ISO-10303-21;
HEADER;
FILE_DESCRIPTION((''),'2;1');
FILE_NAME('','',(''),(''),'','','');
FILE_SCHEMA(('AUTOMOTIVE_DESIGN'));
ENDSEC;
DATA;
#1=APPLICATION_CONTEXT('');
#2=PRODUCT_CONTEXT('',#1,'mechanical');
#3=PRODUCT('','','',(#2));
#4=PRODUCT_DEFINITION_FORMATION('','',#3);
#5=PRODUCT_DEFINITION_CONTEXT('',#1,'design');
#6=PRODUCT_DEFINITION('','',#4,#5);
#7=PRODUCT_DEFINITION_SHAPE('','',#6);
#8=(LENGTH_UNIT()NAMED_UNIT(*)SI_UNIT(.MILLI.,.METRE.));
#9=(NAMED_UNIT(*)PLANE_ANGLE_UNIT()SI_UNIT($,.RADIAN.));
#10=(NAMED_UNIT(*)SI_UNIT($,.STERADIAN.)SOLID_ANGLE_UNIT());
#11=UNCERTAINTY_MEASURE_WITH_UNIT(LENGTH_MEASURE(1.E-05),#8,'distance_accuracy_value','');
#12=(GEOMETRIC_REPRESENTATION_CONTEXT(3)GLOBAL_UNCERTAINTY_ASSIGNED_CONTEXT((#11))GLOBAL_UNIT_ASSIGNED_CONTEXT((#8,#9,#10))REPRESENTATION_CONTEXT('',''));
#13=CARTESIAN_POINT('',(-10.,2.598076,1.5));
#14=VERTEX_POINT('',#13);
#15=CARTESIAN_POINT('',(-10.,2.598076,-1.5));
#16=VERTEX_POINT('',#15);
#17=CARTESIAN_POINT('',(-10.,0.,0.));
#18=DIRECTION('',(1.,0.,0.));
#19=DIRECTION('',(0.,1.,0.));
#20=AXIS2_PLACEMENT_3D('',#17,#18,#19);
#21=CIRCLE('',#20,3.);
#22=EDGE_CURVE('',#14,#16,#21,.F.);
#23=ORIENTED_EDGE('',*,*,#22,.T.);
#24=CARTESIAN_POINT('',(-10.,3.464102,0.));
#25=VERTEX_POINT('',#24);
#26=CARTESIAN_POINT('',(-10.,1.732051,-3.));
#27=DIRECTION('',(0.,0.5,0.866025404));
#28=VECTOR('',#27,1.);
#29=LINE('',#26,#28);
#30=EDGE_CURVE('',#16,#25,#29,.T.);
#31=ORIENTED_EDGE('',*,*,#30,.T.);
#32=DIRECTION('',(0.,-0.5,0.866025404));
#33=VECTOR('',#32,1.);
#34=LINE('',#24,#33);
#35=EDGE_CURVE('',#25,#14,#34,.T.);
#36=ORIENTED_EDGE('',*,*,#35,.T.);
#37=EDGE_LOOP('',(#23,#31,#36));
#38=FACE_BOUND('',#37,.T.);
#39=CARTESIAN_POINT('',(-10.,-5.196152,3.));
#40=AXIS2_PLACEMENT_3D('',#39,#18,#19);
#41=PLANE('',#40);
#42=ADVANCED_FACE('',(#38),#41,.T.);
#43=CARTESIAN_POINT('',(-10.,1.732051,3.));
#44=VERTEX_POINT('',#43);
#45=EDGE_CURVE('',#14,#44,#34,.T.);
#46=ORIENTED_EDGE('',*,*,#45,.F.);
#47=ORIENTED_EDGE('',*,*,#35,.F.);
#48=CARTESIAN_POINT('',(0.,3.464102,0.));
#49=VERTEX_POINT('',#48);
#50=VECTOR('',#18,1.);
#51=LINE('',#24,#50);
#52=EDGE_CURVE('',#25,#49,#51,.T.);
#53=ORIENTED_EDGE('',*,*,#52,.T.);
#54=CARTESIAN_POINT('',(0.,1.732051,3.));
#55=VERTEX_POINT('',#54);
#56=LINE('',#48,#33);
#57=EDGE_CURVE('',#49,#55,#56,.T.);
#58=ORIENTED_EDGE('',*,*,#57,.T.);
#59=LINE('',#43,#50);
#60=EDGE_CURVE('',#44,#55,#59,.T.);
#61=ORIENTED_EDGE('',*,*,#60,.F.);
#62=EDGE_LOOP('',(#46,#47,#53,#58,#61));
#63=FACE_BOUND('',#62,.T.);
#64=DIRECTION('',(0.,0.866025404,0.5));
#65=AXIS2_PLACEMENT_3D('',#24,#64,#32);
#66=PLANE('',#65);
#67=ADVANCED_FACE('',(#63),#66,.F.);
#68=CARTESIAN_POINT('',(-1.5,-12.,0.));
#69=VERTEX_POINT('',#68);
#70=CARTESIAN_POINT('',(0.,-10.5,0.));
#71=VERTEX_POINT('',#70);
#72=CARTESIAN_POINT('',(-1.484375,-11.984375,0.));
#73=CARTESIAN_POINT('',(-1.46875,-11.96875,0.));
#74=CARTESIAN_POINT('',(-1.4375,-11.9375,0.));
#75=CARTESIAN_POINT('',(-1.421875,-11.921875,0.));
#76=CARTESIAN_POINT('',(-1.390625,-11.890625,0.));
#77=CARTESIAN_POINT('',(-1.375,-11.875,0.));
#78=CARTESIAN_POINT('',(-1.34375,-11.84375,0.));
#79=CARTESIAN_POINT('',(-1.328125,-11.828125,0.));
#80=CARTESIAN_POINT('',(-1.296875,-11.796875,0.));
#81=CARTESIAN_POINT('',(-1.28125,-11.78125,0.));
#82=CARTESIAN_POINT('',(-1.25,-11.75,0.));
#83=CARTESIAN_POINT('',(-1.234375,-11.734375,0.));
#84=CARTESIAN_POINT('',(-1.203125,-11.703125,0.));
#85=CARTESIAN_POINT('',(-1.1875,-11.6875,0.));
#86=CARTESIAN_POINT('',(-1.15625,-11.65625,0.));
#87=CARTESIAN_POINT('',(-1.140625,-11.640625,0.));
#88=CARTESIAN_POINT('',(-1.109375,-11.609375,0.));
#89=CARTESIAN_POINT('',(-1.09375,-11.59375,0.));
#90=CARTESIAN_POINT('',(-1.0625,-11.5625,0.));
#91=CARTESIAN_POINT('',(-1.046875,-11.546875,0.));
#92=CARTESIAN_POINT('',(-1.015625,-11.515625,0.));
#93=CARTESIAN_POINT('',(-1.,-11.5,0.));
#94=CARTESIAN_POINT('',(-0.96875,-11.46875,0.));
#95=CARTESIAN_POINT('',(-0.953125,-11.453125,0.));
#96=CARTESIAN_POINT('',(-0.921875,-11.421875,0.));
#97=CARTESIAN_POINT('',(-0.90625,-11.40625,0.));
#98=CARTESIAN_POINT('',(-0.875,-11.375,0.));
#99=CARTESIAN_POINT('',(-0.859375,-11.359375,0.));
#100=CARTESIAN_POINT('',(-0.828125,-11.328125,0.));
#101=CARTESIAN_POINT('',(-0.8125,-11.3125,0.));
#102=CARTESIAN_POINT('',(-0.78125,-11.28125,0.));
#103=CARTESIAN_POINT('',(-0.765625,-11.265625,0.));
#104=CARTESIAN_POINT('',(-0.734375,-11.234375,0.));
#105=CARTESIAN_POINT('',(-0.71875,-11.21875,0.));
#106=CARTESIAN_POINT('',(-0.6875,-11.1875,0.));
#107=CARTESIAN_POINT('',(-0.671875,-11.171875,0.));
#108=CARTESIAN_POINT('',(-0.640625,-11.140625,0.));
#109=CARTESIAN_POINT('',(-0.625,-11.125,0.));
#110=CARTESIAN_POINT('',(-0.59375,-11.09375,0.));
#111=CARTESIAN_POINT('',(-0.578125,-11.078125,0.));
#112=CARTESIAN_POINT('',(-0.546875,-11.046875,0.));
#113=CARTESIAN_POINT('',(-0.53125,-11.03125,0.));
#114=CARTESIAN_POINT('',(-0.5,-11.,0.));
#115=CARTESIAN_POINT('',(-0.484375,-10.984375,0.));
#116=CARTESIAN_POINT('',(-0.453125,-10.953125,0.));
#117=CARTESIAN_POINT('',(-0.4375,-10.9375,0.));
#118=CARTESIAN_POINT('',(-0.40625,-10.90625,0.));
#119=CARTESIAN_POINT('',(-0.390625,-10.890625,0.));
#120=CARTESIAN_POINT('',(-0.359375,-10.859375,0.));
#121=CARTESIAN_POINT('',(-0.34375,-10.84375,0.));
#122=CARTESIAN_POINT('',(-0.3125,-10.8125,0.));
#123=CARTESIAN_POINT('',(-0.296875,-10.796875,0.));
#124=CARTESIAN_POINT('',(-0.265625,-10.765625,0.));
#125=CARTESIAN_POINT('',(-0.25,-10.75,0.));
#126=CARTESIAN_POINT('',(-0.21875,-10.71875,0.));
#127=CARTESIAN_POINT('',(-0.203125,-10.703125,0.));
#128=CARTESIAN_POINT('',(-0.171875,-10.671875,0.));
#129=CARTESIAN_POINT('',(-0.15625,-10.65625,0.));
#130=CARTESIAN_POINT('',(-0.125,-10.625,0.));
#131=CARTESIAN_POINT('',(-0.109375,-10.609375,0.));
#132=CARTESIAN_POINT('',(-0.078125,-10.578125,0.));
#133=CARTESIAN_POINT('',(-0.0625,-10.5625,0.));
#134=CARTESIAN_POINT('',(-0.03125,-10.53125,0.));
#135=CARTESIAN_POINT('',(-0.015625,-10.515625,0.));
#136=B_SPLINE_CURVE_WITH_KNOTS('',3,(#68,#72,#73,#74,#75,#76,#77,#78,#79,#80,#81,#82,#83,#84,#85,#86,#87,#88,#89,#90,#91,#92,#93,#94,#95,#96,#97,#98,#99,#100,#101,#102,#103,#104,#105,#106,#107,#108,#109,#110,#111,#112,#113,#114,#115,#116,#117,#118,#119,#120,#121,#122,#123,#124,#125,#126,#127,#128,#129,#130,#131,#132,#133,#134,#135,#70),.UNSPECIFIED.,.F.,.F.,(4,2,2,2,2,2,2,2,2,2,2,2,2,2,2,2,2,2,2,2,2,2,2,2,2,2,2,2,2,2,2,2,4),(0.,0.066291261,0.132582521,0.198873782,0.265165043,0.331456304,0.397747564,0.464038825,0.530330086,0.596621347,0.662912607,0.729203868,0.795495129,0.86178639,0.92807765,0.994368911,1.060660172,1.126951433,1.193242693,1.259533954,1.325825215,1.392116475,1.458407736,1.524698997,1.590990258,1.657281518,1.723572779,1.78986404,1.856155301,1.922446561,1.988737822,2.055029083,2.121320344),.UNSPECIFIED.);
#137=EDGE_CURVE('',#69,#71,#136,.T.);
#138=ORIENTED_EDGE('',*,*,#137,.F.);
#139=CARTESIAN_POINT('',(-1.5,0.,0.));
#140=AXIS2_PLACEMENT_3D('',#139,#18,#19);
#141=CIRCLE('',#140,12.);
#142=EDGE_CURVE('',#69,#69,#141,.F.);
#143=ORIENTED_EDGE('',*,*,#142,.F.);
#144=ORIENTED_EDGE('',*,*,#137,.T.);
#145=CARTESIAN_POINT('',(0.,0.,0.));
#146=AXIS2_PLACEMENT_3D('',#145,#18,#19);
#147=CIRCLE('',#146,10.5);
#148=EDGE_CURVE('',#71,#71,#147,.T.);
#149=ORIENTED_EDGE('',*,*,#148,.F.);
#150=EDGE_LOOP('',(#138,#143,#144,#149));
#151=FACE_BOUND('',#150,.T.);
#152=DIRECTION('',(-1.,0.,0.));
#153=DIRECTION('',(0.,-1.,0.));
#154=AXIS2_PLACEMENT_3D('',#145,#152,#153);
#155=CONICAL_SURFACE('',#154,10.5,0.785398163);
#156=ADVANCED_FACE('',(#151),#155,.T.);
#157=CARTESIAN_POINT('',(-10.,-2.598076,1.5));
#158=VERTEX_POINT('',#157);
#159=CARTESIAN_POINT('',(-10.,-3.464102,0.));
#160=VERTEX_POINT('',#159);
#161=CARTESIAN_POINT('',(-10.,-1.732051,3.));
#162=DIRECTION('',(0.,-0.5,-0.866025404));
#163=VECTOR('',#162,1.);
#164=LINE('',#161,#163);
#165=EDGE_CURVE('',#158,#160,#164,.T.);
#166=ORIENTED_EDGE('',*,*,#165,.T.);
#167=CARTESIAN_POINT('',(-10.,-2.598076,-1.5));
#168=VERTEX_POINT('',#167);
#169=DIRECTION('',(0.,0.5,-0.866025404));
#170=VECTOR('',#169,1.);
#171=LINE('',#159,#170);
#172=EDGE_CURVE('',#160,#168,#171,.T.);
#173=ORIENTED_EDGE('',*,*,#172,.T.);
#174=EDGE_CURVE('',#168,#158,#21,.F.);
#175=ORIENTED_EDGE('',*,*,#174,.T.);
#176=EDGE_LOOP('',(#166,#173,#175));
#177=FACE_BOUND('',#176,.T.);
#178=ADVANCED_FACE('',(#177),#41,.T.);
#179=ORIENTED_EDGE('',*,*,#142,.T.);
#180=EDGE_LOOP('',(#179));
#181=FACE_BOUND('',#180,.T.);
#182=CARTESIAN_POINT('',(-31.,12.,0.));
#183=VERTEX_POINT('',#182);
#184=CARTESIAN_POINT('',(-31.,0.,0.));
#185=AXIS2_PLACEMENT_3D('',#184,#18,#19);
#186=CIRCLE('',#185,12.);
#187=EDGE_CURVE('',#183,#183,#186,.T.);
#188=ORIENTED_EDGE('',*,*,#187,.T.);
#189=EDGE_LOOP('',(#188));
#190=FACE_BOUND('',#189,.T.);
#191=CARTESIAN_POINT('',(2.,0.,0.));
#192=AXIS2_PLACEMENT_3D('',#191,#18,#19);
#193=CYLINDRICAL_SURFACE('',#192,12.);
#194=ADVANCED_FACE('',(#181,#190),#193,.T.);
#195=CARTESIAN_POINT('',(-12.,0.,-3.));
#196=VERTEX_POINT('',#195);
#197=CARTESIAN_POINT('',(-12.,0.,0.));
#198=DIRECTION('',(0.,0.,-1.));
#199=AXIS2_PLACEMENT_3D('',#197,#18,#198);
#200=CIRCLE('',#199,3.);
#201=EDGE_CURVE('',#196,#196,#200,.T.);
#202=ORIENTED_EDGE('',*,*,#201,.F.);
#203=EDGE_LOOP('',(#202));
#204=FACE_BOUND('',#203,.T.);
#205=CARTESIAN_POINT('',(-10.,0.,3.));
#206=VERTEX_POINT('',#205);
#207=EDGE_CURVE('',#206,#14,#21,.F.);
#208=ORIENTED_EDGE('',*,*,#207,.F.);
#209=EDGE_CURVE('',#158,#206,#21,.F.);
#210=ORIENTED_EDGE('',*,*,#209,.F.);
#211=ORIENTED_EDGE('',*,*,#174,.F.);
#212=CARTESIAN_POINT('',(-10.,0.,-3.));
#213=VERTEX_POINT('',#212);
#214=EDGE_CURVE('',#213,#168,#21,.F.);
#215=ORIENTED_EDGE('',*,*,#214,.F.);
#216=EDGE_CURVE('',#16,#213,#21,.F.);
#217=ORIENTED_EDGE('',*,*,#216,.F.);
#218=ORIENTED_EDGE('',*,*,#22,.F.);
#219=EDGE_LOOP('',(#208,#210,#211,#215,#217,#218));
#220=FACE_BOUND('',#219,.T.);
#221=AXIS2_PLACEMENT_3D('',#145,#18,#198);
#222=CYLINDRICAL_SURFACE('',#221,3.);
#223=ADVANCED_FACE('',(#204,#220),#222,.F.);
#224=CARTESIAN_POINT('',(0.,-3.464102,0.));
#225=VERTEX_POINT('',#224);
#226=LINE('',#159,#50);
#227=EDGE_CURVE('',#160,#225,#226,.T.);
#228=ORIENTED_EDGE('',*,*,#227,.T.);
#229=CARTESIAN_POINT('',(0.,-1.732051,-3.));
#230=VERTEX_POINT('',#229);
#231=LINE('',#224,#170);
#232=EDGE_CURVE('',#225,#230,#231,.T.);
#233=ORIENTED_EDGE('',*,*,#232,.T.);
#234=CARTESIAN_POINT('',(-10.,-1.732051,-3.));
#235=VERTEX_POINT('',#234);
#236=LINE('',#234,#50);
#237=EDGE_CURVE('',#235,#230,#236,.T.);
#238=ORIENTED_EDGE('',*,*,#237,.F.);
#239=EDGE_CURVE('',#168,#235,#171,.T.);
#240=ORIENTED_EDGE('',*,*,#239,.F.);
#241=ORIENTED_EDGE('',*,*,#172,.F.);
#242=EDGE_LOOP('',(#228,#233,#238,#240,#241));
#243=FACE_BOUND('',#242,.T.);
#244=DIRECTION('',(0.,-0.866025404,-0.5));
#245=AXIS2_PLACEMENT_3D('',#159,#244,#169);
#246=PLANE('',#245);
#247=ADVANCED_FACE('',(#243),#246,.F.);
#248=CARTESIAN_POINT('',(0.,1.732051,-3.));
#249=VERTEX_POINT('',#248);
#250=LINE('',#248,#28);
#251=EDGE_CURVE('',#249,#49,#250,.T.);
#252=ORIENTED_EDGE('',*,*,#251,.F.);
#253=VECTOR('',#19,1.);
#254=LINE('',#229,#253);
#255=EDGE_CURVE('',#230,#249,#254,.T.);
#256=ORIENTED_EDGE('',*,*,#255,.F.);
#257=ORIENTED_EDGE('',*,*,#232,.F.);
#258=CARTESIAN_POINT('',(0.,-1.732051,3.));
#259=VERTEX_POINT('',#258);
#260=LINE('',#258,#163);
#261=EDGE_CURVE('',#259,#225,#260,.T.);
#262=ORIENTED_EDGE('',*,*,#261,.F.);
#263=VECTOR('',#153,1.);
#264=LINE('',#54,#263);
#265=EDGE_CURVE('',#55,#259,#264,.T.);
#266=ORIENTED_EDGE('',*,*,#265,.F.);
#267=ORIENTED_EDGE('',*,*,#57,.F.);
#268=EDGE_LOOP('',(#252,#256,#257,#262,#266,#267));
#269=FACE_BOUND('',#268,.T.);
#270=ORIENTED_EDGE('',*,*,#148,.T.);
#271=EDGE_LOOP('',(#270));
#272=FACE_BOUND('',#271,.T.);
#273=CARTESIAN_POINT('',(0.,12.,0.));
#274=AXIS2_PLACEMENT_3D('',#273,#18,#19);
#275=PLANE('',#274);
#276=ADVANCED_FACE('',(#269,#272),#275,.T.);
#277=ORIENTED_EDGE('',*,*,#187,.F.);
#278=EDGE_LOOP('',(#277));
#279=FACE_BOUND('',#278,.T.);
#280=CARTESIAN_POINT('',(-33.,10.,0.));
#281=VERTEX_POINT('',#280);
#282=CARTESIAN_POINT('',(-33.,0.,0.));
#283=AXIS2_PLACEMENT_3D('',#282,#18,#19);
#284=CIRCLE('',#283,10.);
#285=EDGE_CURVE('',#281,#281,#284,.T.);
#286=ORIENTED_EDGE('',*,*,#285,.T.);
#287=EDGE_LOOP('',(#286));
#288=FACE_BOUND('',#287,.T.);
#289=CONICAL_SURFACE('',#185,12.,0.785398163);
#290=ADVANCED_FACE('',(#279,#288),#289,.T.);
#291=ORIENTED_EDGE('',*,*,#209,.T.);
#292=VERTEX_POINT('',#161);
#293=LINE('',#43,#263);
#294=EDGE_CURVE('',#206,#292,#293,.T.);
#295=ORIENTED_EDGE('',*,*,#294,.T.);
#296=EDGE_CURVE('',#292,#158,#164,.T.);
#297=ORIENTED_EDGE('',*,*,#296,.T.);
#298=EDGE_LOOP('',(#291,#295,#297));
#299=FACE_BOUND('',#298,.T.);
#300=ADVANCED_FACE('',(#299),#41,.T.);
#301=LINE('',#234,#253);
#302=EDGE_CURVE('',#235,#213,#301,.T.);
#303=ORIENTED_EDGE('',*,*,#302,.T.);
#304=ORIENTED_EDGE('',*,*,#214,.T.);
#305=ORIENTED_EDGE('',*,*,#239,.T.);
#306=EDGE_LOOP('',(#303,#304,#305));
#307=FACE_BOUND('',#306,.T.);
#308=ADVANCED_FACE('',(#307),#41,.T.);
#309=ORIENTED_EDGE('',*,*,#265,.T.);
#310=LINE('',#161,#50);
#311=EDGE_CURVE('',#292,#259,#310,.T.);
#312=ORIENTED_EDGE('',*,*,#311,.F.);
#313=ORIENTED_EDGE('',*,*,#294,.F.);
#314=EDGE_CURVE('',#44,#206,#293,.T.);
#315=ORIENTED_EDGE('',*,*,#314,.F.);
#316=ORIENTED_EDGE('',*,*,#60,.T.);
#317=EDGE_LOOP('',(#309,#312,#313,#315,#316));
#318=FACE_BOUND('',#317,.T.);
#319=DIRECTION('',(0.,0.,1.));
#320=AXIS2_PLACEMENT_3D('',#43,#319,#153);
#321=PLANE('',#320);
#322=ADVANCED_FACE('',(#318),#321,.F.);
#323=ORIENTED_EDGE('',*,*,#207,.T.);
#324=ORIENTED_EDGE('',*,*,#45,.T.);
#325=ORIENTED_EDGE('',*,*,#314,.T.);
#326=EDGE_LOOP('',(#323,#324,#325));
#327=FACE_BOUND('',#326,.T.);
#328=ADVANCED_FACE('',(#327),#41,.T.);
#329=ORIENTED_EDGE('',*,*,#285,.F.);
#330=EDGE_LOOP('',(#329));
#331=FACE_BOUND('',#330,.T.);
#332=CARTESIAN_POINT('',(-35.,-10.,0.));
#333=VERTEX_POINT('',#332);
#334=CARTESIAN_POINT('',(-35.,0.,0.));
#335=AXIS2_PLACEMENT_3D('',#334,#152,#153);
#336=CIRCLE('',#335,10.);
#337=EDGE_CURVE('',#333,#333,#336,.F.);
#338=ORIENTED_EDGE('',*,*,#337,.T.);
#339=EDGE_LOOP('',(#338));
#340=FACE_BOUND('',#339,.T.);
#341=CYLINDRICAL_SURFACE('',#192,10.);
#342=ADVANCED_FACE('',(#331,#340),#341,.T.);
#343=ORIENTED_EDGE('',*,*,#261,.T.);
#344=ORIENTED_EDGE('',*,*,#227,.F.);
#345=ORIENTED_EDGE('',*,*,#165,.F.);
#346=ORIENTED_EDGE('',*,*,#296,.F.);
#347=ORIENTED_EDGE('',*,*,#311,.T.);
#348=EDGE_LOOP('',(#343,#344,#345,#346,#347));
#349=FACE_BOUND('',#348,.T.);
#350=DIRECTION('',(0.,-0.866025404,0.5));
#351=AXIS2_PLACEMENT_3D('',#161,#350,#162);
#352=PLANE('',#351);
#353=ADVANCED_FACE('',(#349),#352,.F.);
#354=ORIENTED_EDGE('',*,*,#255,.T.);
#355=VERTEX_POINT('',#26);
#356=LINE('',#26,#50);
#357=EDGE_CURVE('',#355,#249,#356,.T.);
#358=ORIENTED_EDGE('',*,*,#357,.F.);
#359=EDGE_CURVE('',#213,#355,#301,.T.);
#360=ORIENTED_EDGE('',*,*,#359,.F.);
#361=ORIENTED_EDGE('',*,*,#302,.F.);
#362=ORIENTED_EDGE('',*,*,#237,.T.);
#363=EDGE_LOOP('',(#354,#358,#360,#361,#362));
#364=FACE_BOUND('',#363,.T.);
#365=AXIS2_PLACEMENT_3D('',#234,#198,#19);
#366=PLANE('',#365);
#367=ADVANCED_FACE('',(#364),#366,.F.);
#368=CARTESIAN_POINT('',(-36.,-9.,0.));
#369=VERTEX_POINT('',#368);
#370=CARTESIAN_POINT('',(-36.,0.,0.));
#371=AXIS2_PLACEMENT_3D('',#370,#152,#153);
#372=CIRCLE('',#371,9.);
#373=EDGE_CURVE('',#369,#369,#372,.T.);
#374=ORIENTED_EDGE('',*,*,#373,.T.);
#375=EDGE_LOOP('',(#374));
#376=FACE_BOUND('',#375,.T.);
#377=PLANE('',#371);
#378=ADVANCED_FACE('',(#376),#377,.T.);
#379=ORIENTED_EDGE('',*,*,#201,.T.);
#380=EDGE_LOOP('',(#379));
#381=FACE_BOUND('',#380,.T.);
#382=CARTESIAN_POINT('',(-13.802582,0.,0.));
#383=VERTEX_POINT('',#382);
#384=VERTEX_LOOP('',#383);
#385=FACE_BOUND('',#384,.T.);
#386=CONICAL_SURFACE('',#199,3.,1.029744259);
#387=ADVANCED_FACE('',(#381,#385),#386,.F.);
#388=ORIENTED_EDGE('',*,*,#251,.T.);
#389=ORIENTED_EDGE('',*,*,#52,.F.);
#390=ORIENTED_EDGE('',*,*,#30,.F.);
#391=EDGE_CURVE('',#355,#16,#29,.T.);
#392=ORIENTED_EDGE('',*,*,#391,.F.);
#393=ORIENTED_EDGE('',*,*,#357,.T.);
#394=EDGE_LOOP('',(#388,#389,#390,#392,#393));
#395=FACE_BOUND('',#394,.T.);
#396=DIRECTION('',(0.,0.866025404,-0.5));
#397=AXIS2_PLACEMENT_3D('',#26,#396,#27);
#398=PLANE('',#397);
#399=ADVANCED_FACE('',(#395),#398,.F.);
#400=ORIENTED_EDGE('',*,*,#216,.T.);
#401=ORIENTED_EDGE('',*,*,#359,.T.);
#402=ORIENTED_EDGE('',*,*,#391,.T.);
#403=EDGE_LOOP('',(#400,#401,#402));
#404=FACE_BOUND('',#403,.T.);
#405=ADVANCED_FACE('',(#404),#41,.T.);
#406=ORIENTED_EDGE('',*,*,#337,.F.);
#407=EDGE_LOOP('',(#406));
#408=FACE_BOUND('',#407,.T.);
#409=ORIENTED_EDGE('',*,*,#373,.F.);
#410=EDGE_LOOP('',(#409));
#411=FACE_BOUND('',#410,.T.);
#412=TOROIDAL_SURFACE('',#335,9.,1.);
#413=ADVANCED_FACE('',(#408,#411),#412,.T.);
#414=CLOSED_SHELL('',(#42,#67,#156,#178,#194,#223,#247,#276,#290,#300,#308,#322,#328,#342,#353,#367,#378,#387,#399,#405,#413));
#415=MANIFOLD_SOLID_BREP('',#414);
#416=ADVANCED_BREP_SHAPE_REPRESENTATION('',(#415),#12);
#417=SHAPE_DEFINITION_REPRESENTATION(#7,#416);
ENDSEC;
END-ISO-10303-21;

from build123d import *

# Parameters (mm, degrees)
CHAMFER1_SIZE  = 1.5
R1_RUNDING_R   = 1
SEKSKANT_DEPTH = 10


# Read off the part's stored shape, not the designer's step: Hul for sekskant
with BuildPart() as part:
    # Sketch1 → Base-Revolve (revolve)
    with BuildSketch(Plane.XY):
        Polygon((-36, 0), (-36, 10), (-33, 10), (-31, 12), (0, 12), (0, 0), align=None)
    revolve(axis=Axis((2, 0, 0), (-1, 0, 0)))

    # Chamfer1
    chamfer1_edges = [part.edges().sort_by_distance(p)[0] for p in [
        (0, -12, 0),
    ]]
    chamfer(chamfer1_edges, length=CHAMFER1_SIZE)

    # R1 runding
    r1_runding_edges = [part.edges().sort_by_distance(p)[0] for p in [
        (-36, -10, 0),
    ]]
    fillet(r1_runding_edges, radius=R1_RUNDING_R)

    # Hul for sekskant outline → Hul for sekskant (revolve, cut)
    with BuildSketch(Plane.YX):
        Polygon((0, 0), (0, -13.802581857), (3, -12), (3, 0), align=None)
    revolve(axis=Axis((0, 0, 0), (1, 0, 0)), mode=Mode.SUBTRACT)

    # Sketch8 → Sekskant (cut)
    with BuildSketch(Plane(origin=(0, 0, 0), x_dir=(0, 0, -1), z_dir=(1, 0, 0))):
        Polygon((-3, -1.732050808), (0, -3.464101615), (3, -1.732050808), (3, 1.732050808), (0, 3.464101615), (-3, 1.732050808), align=None)
    extrude(amount=-SEKSKANT_DEPTH, mode=Mode.SUBTRACT)


solid = part.part
